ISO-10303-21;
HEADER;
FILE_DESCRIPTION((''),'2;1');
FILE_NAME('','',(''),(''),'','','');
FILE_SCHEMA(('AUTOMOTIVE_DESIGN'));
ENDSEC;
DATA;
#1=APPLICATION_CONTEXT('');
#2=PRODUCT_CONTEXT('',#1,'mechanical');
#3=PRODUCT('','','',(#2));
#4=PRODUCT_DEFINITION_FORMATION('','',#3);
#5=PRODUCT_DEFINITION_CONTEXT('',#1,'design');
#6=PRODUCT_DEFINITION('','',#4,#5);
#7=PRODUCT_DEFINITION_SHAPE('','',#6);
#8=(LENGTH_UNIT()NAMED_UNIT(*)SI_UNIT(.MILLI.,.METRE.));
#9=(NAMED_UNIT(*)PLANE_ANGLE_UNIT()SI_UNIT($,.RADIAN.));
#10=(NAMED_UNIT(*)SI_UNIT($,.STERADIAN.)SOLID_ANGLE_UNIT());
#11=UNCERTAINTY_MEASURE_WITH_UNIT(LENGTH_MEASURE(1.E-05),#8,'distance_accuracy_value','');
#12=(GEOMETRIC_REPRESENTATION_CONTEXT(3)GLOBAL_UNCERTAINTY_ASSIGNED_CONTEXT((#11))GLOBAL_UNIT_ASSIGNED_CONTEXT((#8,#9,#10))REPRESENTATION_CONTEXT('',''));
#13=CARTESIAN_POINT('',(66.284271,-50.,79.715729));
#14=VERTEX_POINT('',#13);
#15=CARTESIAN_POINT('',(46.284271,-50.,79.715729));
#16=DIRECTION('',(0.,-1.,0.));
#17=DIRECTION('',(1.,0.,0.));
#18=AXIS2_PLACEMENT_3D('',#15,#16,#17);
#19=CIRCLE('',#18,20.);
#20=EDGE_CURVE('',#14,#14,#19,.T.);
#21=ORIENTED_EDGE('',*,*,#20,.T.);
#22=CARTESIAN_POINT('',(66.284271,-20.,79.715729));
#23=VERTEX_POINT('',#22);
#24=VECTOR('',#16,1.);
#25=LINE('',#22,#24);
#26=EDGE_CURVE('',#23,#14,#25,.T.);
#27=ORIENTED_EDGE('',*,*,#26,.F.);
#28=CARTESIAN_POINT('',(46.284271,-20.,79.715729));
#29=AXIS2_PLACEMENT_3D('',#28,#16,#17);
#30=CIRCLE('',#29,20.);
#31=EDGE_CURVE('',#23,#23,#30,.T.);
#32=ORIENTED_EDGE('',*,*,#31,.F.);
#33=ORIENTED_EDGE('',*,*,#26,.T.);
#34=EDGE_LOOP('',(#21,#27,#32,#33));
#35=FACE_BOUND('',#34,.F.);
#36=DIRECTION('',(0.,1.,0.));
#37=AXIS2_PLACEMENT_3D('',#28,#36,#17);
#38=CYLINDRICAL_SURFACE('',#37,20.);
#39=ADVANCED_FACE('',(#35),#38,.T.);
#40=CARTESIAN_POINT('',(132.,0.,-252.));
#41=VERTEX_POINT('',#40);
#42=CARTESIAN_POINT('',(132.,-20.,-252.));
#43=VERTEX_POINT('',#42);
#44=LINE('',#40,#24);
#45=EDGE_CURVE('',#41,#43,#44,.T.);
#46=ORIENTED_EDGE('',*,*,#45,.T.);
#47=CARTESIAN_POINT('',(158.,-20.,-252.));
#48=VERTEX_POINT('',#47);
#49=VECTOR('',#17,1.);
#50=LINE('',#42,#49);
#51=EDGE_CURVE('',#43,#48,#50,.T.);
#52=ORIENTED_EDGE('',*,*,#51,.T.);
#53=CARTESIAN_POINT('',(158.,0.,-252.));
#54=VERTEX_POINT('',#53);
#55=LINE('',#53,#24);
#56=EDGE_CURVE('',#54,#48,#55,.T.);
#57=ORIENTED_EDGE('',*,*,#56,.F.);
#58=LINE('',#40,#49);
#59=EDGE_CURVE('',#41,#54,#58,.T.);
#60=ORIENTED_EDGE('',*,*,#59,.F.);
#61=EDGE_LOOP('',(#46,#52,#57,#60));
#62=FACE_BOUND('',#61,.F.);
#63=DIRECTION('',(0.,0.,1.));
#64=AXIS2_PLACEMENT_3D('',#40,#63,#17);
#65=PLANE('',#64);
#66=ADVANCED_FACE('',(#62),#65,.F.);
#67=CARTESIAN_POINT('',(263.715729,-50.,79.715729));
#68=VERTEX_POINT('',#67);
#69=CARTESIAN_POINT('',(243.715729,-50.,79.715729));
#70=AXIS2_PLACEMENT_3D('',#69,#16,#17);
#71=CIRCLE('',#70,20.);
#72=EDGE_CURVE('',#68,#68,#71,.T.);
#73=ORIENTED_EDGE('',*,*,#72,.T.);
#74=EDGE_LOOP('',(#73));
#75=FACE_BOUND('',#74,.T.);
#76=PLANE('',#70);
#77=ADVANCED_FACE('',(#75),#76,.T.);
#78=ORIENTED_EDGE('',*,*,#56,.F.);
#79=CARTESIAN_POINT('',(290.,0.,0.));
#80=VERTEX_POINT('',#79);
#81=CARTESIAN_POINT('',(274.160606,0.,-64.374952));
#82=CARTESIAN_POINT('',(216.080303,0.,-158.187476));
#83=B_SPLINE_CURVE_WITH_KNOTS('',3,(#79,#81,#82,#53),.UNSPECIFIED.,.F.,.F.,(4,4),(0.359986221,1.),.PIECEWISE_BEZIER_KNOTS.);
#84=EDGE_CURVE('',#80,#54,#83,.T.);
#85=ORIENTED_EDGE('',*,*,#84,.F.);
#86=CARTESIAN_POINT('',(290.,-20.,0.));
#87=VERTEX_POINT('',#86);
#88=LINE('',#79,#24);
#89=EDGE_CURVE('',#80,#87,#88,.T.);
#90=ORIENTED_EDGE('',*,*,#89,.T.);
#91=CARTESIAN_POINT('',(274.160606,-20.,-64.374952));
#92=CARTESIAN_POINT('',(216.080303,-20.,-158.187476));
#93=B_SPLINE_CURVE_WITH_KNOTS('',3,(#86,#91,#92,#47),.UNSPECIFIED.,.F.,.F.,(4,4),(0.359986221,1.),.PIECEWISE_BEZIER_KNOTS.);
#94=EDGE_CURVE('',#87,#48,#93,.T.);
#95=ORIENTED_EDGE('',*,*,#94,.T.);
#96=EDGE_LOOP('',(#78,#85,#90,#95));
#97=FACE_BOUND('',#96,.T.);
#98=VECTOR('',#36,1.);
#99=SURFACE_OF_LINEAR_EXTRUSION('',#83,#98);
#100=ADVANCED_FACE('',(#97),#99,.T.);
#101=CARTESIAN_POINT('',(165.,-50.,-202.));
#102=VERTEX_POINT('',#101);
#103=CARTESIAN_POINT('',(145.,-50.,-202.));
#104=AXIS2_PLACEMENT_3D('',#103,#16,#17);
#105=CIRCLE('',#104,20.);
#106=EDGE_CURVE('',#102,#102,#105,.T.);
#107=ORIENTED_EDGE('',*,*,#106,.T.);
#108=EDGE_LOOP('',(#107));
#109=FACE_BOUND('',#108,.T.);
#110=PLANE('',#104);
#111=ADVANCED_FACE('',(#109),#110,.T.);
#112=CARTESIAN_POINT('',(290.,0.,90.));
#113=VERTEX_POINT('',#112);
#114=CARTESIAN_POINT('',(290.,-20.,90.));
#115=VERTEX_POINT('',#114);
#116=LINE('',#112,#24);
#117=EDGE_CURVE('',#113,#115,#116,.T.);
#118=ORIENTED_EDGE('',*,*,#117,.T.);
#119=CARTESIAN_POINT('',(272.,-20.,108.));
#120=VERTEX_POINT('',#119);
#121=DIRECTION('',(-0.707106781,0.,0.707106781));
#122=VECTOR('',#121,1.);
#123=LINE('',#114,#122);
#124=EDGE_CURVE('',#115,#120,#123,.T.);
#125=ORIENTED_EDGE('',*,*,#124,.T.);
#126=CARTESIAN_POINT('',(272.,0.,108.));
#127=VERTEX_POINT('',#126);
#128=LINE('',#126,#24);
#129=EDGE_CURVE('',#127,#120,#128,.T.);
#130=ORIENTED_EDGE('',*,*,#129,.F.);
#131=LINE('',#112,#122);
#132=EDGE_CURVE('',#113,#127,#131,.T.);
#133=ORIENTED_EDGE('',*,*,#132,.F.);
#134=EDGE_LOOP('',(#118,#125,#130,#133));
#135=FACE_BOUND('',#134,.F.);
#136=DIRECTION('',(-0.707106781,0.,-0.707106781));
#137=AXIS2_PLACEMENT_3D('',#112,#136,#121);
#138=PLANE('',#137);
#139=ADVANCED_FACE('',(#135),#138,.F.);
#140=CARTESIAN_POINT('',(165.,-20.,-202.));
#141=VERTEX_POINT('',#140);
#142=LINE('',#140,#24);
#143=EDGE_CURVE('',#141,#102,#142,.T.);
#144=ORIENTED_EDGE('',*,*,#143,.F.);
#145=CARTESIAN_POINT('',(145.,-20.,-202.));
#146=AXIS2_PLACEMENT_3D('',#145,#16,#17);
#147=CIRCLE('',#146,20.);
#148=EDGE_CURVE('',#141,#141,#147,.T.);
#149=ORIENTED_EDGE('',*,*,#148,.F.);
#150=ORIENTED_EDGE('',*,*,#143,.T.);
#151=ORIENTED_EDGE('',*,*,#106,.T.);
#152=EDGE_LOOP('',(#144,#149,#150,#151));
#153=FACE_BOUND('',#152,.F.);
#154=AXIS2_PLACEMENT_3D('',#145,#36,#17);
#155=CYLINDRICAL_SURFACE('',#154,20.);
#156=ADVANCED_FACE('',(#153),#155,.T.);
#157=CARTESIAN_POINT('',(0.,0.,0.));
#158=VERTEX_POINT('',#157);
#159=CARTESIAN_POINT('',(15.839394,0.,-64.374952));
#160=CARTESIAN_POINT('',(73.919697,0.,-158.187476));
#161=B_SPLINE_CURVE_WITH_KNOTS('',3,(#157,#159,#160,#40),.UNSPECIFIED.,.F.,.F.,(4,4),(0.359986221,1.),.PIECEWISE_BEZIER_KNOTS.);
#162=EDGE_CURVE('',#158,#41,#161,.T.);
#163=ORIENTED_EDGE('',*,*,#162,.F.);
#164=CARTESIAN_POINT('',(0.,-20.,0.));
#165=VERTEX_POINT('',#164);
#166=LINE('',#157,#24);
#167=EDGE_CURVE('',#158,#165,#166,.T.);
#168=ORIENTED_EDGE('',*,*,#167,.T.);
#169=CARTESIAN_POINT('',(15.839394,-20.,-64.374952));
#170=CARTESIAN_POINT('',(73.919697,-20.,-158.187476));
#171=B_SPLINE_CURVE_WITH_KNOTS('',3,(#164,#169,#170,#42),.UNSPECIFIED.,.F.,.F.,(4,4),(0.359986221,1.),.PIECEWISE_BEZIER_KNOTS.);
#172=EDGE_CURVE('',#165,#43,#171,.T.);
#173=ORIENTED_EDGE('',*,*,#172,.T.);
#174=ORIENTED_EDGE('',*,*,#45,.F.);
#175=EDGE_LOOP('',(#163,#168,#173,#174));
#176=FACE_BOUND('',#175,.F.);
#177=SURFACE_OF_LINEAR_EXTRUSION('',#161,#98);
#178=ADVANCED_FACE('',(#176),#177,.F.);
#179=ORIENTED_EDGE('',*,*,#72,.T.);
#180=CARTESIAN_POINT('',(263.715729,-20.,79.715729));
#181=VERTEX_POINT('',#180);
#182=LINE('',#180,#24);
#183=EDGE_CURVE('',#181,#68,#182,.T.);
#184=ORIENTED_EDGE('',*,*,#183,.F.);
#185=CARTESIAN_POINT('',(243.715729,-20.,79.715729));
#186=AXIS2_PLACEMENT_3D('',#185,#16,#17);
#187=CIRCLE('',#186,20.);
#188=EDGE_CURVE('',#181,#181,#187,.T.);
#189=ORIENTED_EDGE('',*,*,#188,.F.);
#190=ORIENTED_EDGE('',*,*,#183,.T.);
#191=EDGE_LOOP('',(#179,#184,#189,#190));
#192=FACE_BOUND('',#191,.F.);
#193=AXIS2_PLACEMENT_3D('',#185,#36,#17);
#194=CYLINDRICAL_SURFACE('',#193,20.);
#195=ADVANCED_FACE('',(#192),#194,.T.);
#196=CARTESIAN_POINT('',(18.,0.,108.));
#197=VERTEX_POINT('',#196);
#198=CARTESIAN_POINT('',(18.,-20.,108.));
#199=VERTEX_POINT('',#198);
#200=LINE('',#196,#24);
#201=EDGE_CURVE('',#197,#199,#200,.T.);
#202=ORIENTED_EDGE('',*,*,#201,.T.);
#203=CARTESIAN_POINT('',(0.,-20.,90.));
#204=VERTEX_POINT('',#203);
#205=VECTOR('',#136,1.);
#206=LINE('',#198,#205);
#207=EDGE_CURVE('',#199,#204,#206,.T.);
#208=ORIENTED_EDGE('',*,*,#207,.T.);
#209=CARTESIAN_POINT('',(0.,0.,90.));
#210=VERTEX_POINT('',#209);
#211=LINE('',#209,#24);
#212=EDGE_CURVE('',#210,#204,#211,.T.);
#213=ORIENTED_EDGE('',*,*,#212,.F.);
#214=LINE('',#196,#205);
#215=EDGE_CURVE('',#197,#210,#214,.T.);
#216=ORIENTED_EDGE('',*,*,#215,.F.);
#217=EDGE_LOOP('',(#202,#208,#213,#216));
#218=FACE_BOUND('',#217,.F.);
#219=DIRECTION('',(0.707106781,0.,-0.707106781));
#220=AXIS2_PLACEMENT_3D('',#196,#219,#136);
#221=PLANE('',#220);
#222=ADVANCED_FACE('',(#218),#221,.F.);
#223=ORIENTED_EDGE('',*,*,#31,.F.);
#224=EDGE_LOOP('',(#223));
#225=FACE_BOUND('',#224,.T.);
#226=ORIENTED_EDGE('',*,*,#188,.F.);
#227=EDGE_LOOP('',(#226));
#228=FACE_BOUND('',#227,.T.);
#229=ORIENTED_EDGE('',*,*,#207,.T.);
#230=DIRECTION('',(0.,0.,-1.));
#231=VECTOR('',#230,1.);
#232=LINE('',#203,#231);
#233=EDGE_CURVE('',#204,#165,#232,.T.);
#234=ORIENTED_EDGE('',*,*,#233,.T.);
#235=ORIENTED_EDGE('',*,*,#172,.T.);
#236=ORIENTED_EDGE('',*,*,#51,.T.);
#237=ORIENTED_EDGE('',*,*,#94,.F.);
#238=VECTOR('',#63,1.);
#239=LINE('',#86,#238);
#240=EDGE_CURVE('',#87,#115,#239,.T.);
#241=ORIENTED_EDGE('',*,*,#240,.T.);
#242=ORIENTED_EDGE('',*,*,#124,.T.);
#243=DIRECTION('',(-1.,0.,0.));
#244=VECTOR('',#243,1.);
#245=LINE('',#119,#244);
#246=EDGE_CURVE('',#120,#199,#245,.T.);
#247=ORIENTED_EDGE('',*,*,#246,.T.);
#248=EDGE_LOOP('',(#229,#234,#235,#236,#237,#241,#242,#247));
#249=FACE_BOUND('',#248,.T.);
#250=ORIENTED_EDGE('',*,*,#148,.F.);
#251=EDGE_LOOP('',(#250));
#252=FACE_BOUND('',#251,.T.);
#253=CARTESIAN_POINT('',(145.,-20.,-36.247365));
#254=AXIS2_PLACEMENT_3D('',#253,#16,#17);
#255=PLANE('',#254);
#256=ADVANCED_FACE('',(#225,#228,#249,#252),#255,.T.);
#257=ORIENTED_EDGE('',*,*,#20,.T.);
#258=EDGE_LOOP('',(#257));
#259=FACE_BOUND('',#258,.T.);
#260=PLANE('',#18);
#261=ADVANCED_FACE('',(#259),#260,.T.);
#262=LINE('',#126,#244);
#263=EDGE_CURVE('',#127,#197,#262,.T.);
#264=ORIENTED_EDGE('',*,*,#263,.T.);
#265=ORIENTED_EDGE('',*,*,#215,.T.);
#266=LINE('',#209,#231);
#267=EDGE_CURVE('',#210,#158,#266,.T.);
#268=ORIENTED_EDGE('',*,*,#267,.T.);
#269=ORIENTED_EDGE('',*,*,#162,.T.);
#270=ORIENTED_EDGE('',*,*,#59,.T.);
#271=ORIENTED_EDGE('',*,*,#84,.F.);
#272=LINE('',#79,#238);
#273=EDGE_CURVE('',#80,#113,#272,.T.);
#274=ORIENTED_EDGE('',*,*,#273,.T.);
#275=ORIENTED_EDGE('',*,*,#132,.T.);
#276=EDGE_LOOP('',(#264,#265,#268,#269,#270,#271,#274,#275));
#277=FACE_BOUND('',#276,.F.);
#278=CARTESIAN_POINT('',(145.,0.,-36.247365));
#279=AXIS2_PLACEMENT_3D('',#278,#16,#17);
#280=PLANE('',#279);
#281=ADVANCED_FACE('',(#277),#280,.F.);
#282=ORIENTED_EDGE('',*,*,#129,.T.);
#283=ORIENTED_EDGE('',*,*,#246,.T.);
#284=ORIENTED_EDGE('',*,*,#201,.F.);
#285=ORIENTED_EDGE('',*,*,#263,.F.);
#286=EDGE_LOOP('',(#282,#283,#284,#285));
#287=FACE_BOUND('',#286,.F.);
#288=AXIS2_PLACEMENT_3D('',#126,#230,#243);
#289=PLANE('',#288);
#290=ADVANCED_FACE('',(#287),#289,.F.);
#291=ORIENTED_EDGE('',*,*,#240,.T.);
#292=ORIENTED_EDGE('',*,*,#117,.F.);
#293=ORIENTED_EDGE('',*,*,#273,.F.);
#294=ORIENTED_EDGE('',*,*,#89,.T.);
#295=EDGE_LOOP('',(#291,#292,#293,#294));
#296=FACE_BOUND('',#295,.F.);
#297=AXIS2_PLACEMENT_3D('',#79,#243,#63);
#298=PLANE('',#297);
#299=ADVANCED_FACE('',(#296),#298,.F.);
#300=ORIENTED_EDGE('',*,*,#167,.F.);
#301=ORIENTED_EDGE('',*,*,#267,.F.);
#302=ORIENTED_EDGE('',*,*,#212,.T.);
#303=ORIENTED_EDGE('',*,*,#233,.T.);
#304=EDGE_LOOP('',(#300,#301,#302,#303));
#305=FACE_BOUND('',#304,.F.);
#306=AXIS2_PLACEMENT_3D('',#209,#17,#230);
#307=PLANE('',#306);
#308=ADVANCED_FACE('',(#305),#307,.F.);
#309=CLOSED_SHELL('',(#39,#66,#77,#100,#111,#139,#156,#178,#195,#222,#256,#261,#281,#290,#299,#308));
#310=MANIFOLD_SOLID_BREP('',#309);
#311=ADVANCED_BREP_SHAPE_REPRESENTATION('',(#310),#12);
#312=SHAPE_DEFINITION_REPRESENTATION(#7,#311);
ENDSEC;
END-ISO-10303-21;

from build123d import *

# Parameters (mm, degrees)
F1_DEPTH = 20
F2_R     = 20
F3_DEPTH = 30


with BuildPart() as f1:
    # F0 (on Front) → F1 (new body)
    with BuildSketch(Plane.XZ):
        with BuildLine():
            add(Edge.make_bspline(
                [(0, 0), (15.8393937026, -64.3749522899), (73.9196968513, -158.1874761449), (132, -252)],
                knots=[0.3599862205, 0.3599862205, 0.3599862205, 0.3599862205, 1, 1, 1, 1], degree=3))
            Line((132, -252), (158, -252))
            add(Edge.make_bspline(
                [(290, 0), (274.1606062974, -64.3749522899), (216.0803031487, -158.1874761449), (158, -252)],
                knots=[0.3599862205, 0.3599862205, 0.3599862205, 0.3599862205, 1, 1, 1, 1], degree=3))
            Line((290, 0), (290, 90))
            Line((290, 90), (272, 108))
            Line((272, 108), (18, 108))
            Line((18, 108), (0, 90))
            Line((0, 90), (0, 0))
        make_face()
    extrude(amount=F1_DEPTH)

    # F2 (on face) → F3 (join)
    with BuildSketch(Plane.XZ.offset(20)):
        with Locations((46.2842712475, 79.7157287525)):
            Circle(F2_R)
        with Locations((243.7157287525, 79.7157287525)):
            Circle(F2_R)
        with Locations((145, -202)):
            Circle(F2_R)
    extrude(amount=F3_DEPTH)


solid = f1.part
